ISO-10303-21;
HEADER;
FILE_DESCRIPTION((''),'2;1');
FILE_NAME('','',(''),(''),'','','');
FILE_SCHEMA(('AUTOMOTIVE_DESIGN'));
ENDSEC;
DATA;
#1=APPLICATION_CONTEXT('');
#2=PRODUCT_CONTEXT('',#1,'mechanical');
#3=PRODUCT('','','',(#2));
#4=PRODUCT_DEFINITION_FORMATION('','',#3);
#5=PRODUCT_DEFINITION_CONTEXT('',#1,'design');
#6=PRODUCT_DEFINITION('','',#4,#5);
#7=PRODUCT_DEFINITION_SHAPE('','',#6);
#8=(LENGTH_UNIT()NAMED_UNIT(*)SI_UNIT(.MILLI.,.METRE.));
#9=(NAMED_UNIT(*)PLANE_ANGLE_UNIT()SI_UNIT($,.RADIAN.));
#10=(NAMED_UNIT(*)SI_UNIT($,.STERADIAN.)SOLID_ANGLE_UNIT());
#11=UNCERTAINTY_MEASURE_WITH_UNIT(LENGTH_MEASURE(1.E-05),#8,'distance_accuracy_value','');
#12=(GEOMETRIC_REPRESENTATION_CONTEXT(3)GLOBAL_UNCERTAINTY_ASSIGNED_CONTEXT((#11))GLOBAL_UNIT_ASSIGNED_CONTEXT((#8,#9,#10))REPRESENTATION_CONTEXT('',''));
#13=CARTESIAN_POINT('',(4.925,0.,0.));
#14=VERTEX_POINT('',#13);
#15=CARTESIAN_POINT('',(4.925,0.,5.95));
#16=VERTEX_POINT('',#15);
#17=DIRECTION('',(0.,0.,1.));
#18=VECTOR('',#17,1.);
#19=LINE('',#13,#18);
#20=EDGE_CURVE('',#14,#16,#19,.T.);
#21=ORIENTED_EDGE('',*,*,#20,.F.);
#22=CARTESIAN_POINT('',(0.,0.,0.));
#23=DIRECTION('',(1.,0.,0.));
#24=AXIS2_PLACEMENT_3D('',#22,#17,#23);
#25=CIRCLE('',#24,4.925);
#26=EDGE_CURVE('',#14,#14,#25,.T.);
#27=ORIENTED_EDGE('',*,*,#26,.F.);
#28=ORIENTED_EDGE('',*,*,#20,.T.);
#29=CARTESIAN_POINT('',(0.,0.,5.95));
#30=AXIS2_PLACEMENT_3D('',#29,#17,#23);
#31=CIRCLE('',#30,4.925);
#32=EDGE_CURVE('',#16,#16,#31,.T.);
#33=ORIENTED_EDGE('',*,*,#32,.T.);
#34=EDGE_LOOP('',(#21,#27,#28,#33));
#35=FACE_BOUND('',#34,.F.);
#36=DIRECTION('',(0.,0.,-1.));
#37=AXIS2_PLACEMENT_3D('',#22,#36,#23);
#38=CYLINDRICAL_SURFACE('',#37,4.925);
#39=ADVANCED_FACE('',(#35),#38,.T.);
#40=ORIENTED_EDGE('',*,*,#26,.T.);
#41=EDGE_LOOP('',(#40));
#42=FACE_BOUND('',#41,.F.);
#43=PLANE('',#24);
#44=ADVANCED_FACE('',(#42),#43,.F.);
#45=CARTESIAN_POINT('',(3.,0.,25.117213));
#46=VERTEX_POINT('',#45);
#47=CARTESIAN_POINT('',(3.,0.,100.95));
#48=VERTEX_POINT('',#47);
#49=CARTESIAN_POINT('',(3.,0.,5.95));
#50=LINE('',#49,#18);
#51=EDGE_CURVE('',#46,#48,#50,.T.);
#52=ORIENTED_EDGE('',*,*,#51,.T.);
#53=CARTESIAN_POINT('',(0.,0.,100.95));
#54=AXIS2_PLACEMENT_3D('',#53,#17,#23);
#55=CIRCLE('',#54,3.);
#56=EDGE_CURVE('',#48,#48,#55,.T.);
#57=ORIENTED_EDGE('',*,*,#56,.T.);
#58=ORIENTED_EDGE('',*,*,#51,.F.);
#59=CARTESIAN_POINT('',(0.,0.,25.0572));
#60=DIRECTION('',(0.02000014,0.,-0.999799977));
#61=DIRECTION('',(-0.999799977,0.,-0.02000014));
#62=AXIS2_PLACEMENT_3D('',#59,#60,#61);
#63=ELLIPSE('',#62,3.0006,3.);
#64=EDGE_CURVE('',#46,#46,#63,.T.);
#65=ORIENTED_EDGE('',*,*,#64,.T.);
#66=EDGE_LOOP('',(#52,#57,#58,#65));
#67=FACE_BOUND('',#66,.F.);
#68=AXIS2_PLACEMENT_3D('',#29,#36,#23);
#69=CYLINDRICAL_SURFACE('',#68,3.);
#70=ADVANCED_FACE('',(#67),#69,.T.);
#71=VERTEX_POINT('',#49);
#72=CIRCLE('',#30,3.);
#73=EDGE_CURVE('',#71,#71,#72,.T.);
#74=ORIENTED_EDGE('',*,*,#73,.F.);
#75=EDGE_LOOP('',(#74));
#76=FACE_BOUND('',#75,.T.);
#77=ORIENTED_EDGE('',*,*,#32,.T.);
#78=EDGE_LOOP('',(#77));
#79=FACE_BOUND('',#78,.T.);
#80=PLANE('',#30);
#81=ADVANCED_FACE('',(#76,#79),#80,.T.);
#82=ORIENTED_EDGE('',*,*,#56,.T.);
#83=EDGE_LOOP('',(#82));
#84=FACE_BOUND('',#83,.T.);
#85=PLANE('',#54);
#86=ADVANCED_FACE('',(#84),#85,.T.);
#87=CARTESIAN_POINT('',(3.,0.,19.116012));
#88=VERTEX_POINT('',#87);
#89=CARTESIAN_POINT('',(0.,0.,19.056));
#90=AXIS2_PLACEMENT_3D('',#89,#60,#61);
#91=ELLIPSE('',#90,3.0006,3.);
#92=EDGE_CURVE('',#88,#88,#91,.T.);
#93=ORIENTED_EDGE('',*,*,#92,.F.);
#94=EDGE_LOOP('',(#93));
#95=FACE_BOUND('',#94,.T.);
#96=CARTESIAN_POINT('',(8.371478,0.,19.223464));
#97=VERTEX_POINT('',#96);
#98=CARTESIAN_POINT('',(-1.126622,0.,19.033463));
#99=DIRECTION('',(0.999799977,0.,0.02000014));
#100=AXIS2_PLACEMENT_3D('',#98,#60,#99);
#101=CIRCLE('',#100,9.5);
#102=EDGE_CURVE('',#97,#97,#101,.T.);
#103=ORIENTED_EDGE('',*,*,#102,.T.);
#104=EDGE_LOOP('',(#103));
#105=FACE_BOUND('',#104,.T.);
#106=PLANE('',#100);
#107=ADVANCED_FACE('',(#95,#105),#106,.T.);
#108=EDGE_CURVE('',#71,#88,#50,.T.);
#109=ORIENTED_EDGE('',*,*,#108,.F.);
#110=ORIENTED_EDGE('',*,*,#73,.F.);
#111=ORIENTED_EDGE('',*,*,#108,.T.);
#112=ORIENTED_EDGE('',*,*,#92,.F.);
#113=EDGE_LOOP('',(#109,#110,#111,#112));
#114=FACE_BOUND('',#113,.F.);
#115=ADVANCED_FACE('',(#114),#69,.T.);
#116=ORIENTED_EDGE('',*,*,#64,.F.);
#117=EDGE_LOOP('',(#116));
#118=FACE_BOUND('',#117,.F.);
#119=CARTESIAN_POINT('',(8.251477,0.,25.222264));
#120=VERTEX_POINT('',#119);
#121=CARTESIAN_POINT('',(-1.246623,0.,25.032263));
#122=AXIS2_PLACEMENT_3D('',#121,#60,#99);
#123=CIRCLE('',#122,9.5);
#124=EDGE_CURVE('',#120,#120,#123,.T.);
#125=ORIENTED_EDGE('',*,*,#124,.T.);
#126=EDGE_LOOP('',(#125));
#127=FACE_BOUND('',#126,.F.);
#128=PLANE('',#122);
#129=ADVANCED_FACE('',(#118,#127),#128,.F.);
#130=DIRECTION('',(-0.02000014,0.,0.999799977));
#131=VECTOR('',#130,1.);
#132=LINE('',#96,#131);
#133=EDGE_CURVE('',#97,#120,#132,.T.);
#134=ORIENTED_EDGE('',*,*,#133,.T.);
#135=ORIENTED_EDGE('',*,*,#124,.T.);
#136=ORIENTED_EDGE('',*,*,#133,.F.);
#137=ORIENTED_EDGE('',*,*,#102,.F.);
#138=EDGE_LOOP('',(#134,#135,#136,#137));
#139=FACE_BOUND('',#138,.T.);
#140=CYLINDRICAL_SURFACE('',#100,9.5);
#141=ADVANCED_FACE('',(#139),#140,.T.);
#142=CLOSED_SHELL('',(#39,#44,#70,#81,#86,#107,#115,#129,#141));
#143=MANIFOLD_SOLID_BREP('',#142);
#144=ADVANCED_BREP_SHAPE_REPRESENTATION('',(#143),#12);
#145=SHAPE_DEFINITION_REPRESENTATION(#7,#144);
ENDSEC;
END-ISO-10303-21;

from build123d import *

# Parameters (mm, degrees)
F0_R     = 4.925
F1_DEPTH = 5.95
F2_R     = 3
F3_DEPTH = 95
F6_R     = 9.5
F7_DEPTH = 6


# Not quite as in the source:
# - a feature of the source that left no trace in its solid (it failed there, or was rolled back) is left out


with BuildPart() as f1:
    # F0 (on Top) → F1 (new body)
    with BuildSketch(Plane.XY):
        Circle(F0_R)
    extrude(amount=F1_DEPTH)

    # F2 (on face) → F3 (join)
    with BuildSketch(Plane.XY.offset(5.95)):
        Circle(F2_R)
    extrude(amount=F3_DEPTH)

    # F6 (on face) → F7 (join)
    with BuildSketch(Plane(origin=(-0.3810464275, 0, 19.0483774936), x_dir=(0.9997999772, 0, 0.0200001396), z_dir=(0.0200001396, 0, -0.9997999772))):
        with Locations((-0.7457245374, 0)):
            Circle(F6_R)
    extrude(amount=-F7_DEPTH)


solid = f1.part
